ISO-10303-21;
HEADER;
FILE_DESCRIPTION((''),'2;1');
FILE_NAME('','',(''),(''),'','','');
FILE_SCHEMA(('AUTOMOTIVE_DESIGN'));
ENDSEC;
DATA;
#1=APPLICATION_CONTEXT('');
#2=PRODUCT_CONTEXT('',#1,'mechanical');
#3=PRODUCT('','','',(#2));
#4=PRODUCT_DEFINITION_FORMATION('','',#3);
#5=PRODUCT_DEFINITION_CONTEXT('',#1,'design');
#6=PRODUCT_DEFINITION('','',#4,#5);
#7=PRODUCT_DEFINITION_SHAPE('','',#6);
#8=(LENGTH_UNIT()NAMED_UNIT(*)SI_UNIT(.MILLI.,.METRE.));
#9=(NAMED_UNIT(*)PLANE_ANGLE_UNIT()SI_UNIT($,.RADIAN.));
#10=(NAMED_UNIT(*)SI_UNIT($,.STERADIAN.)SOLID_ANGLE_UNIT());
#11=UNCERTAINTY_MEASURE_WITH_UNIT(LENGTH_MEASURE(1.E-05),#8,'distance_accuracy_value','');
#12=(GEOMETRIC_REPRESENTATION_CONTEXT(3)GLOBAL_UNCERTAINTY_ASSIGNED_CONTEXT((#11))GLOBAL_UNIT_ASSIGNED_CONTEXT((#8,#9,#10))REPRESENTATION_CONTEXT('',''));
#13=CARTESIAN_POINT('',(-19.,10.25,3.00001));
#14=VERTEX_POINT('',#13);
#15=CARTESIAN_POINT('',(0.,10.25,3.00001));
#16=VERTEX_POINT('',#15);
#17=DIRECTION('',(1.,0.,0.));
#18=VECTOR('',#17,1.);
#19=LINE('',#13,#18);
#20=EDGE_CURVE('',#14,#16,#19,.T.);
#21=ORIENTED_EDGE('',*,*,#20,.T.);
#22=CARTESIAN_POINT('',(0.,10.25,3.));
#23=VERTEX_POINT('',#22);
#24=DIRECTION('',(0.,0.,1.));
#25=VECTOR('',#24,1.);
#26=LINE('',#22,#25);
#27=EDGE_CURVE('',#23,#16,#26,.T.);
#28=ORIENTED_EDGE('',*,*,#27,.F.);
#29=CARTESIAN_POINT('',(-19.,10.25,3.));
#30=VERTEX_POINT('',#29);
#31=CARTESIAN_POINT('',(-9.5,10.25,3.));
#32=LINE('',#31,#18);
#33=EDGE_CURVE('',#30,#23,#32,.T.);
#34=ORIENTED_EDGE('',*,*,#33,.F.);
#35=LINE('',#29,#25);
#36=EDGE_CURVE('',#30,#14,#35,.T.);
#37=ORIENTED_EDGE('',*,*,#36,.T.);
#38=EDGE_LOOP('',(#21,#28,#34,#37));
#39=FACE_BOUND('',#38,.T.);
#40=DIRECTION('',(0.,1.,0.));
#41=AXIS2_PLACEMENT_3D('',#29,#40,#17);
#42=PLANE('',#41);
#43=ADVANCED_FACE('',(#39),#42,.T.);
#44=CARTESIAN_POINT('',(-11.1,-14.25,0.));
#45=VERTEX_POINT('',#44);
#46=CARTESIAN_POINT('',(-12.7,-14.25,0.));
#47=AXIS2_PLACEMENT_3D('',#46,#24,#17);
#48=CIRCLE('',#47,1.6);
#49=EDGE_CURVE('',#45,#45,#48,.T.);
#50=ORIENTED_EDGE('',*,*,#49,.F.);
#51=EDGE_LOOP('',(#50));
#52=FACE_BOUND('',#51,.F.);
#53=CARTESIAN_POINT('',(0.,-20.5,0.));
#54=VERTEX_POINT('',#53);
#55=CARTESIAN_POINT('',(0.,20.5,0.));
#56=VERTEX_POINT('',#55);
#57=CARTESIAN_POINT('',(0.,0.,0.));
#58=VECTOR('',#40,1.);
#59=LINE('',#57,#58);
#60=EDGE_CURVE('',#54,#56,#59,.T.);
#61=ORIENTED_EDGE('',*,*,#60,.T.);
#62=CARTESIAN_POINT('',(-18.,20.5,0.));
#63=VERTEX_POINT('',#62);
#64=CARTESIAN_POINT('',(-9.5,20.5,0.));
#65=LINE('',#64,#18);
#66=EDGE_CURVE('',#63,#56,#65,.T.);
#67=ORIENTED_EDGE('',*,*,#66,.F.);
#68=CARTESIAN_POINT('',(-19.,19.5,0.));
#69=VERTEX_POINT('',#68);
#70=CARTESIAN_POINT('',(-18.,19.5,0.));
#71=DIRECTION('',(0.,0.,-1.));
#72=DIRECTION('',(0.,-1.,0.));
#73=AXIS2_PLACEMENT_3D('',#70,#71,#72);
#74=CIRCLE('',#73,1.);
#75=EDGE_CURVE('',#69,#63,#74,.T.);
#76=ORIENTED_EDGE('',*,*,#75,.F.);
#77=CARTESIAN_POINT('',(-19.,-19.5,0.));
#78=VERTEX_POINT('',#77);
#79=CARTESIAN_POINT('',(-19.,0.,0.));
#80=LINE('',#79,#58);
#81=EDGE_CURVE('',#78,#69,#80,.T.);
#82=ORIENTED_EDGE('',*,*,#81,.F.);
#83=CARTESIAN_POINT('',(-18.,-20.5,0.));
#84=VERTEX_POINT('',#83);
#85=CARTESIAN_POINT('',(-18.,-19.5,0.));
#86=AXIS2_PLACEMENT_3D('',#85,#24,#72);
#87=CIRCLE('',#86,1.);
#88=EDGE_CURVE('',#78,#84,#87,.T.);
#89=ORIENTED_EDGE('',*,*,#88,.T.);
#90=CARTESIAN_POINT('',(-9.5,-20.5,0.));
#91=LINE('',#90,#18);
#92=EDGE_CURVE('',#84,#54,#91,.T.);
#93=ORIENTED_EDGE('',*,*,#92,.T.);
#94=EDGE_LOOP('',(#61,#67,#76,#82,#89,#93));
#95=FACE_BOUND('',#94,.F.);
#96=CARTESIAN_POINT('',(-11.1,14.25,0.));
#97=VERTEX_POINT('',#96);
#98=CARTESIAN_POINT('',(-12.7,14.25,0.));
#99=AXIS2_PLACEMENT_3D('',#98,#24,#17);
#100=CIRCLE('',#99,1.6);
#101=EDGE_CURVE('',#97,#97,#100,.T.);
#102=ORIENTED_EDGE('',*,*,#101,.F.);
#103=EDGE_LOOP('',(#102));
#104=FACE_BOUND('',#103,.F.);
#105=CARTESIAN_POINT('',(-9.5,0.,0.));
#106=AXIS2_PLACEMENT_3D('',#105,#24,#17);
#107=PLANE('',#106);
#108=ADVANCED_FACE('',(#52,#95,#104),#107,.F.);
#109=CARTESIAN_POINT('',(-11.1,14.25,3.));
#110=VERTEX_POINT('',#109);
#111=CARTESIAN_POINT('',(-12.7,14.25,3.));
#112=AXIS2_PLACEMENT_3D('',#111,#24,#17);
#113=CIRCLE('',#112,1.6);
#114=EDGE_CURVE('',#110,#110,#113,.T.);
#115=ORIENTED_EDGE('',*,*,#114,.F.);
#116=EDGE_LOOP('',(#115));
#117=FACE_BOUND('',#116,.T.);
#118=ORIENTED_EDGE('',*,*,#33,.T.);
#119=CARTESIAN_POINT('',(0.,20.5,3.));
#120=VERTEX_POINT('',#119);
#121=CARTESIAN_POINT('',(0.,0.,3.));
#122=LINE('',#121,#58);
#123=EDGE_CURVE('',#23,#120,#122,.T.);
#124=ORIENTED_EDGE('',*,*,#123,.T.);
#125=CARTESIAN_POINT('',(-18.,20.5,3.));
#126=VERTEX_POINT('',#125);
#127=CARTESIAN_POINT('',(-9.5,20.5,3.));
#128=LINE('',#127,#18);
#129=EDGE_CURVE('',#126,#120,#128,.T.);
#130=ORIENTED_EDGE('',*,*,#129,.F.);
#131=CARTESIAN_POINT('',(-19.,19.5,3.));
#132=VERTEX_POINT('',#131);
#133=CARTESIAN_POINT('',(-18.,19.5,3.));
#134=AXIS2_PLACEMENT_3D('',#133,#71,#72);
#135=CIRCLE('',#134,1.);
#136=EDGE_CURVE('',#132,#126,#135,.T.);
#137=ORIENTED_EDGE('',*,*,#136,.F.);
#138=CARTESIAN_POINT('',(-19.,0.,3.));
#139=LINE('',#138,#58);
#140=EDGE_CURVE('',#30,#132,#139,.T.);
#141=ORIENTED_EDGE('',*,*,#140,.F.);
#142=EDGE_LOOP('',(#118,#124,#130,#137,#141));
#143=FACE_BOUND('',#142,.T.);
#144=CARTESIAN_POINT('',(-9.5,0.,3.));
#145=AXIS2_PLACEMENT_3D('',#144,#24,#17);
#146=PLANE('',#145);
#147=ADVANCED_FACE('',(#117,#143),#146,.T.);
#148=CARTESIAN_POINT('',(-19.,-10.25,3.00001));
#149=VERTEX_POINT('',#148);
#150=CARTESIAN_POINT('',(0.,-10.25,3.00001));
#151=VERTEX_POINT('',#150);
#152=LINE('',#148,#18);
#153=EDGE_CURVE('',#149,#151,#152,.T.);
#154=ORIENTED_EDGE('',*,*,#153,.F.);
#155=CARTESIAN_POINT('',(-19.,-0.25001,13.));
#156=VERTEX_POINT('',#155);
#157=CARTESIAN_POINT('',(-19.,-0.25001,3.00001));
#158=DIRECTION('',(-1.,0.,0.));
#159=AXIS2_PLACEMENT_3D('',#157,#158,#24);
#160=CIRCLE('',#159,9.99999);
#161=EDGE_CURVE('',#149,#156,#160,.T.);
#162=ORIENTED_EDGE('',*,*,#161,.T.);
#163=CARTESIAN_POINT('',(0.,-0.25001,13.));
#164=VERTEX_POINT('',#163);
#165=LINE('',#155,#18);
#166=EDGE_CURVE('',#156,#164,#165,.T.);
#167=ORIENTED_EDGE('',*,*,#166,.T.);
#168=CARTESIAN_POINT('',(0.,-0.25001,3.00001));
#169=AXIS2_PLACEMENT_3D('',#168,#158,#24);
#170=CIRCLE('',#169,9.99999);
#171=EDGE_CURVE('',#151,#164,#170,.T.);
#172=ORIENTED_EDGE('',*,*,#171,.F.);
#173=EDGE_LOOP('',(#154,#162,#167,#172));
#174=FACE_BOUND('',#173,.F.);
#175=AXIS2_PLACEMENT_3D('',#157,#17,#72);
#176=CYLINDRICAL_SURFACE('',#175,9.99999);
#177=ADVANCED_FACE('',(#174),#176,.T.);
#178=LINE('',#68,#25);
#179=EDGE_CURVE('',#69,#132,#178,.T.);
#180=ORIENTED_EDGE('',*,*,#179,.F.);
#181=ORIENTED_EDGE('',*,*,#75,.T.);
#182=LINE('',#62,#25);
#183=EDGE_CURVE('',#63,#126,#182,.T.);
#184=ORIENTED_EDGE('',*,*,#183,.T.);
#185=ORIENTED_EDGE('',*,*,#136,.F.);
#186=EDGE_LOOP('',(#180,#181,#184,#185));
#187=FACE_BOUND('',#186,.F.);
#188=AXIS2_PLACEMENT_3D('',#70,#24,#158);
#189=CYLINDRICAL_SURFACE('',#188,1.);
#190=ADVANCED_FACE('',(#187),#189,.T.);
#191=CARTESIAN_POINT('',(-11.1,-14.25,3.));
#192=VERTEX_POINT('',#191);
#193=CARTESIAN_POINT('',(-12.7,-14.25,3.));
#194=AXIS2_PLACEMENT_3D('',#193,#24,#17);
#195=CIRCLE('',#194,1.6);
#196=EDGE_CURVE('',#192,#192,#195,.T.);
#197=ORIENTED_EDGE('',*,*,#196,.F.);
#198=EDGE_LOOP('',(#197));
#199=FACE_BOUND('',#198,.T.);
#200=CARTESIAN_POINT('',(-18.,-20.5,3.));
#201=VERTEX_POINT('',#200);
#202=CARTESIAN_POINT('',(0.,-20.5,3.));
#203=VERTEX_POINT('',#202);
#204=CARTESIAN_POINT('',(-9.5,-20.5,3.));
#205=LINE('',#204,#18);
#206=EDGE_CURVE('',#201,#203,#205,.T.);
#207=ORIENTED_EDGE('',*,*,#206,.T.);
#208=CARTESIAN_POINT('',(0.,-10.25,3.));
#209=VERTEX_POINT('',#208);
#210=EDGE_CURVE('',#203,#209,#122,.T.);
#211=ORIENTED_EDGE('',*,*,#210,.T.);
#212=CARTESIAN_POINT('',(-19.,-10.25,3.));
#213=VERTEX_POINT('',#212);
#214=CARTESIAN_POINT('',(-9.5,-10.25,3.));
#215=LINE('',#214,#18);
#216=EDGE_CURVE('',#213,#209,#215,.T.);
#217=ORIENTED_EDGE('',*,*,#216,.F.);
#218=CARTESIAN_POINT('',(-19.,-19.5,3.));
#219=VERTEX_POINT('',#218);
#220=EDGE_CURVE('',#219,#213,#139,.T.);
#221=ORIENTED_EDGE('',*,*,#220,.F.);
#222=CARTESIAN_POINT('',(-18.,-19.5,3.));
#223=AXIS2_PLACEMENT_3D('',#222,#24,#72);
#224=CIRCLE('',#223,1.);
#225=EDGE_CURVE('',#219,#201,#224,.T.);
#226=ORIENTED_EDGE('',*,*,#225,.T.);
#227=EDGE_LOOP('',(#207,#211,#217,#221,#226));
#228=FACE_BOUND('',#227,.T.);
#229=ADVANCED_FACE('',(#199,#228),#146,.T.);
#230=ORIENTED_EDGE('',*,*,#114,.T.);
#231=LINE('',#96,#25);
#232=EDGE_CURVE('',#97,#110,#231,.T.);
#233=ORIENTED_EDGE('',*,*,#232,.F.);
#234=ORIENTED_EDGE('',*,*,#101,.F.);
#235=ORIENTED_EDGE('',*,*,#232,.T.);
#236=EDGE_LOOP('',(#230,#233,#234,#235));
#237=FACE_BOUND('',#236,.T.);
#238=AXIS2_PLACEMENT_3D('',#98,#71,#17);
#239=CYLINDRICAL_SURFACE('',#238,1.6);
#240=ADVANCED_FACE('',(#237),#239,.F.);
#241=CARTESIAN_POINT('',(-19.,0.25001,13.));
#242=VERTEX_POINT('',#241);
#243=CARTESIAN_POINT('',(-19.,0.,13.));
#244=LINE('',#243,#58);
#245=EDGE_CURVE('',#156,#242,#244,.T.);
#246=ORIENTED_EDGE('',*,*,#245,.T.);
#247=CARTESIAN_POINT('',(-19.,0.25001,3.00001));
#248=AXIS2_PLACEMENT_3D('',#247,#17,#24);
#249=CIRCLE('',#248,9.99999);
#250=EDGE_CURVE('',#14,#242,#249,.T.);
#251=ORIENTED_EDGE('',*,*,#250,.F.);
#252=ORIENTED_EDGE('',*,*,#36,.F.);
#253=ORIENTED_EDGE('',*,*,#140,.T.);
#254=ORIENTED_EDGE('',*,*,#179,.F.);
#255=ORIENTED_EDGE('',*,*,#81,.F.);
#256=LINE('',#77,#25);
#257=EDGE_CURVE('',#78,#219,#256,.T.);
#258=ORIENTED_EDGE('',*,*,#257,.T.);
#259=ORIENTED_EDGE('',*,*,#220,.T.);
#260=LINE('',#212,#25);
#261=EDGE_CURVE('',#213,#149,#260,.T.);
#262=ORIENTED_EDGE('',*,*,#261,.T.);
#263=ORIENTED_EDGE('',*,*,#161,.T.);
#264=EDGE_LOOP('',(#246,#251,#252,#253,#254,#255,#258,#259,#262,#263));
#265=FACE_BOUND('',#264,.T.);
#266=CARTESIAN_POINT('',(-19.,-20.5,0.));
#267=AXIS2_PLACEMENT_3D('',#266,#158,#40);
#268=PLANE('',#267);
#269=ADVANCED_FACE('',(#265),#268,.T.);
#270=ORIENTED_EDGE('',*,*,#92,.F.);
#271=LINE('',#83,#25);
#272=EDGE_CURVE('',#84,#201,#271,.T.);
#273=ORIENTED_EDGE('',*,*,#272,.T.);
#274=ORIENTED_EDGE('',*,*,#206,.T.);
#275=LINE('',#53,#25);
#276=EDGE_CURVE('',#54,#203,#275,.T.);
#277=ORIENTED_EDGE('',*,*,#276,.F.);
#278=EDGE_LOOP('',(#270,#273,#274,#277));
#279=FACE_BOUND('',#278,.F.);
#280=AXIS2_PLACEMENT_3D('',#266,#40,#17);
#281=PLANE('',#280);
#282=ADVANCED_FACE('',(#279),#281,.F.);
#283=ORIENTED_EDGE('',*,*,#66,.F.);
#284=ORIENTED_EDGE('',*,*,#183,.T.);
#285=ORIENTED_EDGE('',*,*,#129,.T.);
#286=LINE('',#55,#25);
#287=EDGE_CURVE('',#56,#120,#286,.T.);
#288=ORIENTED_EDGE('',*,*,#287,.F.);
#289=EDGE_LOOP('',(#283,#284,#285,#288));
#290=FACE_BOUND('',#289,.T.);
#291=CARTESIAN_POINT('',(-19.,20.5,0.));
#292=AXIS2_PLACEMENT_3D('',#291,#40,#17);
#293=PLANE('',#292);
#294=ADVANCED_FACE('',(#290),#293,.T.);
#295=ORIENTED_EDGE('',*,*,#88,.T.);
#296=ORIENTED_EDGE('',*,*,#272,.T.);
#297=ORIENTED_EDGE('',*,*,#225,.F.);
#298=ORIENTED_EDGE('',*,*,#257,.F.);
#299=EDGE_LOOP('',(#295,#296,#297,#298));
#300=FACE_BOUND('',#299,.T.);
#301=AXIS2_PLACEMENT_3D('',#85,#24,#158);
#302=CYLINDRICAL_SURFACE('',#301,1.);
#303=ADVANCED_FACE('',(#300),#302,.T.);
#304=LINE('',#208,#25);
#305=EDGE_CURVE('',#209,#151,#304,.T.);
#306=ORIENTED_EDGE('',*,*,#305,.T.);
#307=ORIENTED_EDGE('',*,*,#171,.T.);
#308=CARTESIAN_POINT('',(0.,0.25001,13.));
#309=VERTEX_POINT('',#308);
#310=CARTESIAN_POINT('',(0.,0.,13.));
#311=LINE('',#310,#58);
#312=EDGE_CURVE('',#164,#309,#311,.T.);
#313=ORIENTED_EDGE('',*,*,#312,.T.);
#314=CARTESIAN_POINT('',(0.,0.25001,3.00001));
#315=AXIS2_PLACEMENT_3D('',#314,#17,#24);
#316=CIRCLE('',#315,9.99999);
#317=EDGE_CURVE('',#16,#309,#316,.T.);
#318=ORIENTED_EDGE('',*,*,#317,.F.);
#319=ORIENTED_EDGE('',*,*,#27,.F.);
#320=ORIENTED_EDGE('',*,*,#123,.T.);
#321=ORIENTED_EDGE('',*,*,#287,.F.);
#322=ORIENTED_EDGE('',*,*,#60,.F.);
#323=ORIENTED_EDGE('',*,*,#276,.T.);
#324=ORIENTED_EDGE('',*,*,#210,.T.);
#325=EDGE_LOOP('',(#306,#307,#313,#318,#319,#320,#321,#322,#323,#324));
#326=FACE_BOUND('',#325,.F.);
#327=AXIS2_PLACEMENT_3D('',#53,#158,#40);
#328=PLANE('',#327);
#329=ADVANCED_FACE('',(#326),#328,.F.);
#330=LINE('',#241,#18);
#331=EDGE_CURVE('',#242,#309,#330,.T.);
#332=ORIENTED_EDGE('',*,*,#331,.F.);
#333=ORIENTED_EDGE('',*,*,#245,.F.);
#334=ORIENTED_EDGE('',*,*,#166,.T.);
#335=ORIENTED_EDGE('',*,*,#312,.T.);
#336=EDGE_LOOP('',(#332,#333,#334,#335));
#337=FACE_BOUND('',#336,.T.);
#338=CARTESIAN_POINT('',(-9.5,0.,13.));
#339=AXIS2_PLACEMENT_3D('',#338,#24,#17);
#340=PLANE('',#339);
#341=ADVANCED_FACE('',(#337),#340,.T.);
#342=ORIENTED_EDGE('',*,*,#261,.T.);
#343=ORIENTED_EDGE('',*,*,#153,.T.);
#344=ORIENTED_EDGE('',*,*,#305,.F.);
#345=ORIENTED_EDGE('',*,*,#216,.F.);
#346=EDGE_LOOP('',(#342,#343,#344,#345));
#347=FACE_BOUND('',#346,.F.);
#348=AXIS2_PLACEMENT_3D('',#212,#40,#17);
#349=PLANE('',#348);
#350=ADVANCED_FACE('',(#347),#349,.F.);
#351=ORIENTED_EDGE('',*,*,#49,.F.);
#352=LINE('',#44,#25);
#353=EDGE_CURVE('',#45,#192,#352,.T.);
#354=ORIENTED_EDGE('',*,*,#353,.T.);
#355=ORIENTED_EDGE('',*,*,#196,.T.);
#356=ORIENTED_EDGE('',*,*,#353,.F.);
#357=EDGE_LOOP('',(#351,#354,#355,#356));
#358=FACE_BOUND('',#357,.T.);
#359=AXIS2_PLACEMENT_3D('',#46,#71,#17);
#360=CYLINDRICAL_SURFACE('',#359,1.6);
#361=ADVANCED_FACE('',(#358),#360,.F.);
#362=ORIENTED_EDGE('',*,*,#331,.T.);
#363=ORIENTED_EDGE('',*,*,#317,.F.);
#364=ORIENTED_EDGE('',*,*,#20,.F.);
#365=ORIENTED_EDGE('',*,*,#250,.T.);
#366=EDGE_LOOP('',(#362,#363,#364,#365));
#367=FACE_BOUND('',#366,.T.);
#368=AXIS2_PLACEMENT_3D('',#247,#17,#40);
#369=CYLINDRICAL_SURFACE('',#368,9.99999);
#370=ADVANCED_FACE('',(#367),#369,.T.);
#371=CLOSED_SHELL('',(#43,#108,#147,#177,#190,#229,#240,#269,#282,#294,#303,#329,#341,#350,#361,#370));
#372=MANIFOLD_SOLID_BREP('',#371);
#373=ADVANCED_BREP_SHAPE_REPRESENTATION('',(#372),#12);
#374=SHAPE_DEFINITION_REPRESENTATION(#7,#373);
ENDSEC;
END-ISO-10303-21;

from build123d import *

# Parameters (mm, degrees)
F0_W     = 19
F0_H     = 41
F0_R     = 1.6
F1_DEPTH = 3
F2_R     = 1
F3_W     = 19
F3_H     = 20.5
F4_DEPTH = 10
F5_R     = 9.99999


# Not quite as in the source:
# - a fillet or chamfer is up to 0.001 mm smaller than in the source, because OpenCascade refuses the exact size


with BuildPart() as f1:
    # F0 (on Top) → F1 (new body)
    with BuildSketch(Plane.XY):
        with Locations((-9.5, 0)):
            Rectangle(F0_W, F0_H)
        with Locations((-12.7, -14.25)):
            Circle(F0_R, mode=Mode.SUBTRACT)
        with Locations((-12.7, 14.25)):
            Circle(F0_R, mode=Mode.SUBTRACT)
    extrude(amount=F1_DEPTH)

    # F2
    f2_edges = [f1.edges().sort_by_distance(p)[0] for p in [
        (-19, -20.5, 1.5),
        (-19, 20.5, 1.5),
    ]]
    fillet(f2_edges, radius=F2_R)

    # F3 (on face) → F4 (join)
    with BuildSketch(Plane.XY.offset(3)):
        with Locations((-9.5, 0)):
            Rectangle(F3_W, F3_H)
    extrude(amount=F4_DEPTH)

    # F5 (radius 10 in the source; OpenCascade refuses exactly that, so slightly less here)
    f5_edges = [f1.edges().sort_by_distance(p)[0] for p in [
        (-9.5, 10.25, 13),
        (-9.5, -10.25, 13),
    ]]
    fillet(f5_edges, radius=F5_R)


solid = f1.part
